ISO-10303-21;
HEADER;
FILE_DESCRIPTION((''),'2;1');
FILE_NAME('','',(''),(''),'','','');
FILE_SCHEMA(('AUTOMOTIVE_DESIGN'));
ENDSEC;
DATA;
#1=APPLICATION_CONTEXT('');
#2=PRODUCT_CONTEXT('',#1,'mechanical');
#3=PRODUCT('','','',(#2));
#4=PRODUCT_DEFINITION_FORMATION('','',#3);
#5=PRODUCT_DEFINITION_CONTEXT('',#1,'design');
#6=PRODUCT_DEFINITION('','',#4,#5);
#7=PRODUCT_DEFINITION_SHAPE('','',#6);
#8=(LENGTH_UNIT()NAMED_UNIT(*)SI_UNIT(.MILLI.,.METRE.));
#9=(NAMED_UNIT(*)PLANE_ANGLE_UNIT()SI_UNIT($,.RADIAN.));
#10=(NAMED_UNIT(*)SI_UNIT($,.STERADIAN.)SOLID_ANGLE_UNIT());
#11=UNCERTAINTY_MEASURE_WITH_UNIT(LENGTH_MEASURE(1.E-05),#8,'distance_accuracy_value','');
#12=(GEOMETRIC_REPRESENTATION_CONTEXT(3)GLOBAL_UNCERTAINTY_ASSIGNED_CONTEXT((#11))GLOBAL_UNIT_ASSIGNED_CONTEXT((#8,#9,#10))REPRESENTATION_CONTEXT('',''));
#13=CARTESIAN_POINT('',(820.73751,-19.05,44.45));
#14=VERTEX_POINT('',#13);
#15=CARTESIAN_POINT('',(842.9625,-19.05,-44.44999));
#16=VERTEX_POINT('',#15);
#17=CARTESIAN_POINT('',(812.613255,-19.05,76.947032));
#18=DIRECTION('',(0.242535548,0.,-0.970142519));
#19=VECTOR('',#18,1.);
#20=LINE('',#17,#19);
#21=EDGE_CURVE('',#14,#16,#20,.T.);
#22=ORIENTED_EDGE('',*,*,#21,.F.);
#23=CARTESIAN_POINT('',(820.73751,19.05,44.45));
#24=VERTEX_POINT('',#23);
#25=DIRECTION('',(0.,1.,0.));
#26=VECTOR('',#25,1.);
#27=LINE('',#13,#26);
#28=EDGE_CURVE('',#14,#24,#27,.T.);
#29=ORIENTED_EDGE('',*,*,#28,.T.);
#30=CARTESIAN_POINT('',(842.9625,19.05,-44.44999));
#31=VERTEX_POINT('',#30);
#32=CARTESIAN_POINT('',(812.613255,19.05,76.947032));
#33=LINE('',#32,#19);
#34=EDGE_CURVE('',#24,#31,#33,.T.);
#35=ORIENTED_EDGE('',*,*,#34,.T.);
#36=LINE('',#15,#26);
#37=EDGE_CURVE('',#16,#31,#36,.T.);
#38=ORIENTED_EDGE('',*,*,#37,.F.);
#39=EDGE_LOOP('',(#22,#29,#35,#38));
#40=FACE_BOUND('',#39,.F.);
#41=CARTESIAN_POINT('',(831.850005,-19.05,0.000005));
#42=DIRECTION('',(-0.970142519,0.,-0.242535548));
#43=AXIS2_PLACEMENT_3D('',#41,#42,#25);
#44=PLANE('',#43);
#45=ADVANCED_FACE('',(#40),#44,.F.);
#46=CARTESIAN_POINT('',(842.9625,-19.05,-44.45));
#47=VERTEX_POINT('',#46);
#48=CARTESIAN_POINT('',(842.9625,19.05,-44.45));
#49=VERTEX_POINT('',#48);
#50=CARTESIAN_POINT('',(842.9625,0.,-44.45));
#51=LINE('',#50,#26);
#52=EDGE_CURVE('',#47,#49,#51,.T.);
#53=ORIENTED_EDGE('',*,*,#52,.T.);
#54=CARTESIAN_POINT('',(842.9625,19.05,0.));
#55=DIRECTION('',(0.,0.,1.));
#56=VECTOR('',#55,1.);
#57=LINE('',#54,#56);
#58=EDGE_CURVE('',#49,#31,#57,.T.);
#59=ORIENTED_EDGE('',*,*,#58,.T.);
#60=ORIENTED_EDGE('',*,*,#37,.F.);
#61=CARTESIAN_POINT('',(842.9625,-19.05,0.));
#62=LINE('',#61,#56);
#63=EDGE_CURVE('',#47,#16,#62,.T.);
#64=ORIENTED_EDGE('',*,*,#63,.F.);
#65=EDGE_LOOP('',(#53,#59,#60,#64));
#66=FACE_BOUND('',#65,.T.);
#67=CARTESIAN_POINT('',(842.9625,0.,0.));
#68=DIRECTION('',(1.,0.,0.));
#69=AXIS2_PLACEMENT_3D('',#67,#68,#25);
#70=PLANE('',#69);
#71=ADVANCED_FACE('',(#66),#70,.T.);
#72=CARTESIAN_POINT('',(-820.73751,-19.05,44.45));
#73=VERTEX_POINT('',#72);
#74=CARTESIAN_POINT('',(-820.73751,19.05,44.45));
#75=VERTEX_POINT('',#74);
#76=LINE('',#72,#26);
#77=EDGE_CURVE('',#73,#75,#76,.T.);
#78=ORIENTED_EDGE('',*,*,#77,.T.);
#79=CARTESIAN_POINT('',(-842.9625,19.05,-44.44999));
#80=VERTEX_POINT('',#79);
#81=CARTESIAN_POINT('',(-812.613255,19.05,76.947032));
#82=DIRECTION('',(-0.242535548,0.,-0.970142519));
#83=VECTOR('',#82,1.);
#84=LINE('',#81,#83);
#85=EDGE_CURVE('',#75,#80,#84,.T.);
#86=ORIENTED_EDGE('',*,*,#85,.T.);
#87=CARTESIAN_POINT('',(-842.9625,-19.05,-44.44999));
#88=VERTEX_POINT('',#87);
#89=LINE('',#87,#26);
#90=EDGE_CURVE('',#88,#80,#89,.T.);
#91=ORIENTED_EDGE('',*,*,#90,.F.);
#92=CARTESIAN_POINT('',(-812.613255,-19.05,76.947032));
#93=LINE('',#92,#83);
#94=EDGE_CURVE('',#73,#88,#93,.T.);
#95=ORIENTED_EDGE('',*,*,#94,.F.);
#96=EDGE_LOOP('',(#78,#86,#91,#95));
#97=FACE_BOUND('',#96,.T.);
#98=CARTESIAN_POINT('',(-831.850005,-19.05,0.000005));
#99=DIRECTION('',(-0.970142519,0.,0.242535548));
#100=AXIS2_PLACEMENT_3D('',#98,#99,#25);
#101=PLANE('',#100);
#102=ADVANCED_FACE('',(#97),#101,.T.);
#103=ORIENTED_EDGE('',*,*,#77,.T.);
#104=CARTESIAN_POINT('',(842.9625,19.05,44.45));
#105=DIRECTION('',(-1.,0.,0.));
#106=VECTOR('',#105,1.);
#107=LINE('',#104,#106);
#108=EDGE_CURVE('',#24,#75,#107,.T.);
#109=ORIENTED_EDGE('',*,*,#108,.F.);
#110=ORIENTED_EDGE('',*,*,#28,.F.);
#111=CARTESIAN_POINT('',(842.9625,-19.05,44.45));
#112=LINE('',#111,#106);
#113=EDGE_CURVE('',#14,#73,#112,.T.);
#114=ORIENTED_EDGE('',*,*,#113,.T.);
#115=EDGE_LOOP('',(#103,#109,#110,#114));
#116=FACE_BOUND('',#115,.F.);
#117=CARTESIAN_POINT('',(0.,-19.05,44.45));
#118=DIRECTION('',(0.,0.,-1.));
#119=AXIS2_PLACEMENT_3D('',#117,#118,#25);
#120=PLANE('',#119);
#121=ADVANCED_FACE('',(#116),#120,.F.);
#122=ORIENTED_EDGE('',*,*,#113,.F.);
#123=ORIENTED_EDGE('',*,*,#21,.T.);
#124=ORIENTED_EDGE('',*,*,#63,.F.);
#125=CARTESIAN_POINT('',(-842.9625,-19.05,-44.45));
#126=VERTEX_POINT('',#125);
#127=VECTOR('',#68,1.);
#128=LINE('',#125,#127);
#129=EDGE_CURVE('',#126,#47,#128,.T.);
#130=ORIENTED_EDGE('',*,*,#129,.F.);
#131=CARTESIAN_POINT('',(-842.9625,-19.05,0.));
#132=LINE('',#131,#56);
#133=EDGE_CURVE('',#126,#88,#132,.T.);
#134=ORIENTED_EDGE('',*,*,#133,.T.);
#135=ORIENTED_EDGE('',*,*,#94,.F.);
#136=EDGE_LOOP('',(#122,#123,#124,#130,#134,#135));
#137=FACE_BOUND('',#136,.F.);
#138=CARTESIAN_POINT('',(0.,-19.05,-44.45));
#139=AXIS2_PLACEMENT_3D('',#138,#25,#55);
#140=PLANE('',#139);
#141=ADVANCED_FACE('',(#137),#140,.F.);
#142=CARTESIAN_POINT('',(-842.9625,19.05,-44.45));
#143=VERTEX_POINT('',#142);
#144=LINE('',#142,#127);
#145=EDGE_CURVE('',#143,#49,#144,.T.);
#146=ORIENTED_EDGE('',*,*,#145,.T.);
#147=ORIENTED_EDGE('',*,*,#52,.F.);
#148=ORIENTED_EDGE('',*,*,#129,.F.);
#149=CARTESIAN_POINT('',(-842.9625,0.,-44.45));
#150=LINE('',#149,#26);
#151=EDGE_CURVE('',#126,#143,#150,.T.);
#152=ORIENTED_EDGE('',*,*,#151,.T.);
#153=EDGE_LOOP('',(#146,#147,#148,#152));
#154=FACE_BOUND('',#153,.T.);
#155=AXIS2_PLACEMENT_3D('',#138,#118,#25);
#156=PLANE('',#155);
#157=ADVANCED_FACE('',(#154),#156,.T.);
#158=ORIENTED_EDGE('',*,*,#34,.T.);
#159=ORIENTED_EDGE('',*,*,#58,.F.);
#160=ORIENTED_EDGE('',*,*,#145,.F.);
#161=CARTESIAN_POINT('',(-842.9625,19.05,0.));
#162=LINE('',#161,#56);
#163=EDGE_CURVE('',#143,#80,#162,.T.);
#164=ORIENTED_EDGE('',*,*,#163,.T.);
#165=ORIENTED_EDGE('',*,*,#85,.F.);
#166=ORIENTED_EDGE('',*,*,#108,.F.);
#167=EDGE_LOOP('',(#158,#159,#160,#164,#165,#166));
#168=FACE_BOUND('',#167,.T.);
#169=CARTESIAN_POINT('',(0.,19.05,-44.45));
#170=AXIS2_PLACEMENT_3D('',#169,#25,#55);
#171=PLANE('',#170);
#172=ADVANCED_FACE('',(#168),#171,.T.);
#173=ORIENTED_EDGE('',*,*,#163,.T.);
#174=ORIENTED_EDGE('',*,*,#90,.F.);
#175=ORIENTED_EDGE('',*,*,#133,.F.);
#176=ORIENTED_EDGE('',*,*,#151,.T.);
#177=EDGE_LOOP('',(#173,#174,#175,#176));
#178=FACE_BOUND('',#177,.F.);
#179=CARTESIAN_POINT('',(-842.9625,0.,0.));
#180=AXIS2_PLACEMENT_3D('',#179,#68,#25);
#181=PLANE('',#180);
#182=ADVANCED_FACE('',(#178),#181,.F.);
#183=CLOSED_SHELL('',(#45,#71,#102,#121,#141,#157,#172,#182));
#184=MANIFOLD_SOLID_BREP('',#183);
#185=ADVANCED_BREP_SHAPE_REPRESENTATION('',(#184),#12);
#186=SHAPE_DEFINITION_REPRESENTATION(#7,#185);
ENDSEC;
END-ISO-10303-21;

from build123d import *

# Parameters (mm, degrees)
F0_W     = 38.1
F0_H     = 88.9
F1_DEPTH = 842.9625
F2_SIZE2 = 88.89999
F2_SIZE  = 22.22499


# Not quite as in the source:
# - a fillet or chamfer is up to 0.001 mm smaller than in the source, because OpenCascade refuses the exact size


with BuildPart() as f1:
    # F0 (on Right) → F1 (new body, symmetric)
    with BuildSketch(Plane.YZ):
        Rectangle(F0_W, F0_H)
    extrude(amount=F1_DEPTH, both=True)

    # F2 (size 22.225 and 88.9 in the source; OpenCascade refuses exactly that, so slightly less here)
    f2_edges = [f1.edges().sort_by_distance(p)[0] for p in [
        (842.9625, 0, 44.45),
        (-842.9625, 0, 44.45),
    ]]
    f2_side = f1.faces().sort_by_distance((0, 0, 44.45))[0]
    chamfer(f2_edges, length=F2_SIZE, length2=F2_SIZE2, reference=f2_side)


solid = f1.part
